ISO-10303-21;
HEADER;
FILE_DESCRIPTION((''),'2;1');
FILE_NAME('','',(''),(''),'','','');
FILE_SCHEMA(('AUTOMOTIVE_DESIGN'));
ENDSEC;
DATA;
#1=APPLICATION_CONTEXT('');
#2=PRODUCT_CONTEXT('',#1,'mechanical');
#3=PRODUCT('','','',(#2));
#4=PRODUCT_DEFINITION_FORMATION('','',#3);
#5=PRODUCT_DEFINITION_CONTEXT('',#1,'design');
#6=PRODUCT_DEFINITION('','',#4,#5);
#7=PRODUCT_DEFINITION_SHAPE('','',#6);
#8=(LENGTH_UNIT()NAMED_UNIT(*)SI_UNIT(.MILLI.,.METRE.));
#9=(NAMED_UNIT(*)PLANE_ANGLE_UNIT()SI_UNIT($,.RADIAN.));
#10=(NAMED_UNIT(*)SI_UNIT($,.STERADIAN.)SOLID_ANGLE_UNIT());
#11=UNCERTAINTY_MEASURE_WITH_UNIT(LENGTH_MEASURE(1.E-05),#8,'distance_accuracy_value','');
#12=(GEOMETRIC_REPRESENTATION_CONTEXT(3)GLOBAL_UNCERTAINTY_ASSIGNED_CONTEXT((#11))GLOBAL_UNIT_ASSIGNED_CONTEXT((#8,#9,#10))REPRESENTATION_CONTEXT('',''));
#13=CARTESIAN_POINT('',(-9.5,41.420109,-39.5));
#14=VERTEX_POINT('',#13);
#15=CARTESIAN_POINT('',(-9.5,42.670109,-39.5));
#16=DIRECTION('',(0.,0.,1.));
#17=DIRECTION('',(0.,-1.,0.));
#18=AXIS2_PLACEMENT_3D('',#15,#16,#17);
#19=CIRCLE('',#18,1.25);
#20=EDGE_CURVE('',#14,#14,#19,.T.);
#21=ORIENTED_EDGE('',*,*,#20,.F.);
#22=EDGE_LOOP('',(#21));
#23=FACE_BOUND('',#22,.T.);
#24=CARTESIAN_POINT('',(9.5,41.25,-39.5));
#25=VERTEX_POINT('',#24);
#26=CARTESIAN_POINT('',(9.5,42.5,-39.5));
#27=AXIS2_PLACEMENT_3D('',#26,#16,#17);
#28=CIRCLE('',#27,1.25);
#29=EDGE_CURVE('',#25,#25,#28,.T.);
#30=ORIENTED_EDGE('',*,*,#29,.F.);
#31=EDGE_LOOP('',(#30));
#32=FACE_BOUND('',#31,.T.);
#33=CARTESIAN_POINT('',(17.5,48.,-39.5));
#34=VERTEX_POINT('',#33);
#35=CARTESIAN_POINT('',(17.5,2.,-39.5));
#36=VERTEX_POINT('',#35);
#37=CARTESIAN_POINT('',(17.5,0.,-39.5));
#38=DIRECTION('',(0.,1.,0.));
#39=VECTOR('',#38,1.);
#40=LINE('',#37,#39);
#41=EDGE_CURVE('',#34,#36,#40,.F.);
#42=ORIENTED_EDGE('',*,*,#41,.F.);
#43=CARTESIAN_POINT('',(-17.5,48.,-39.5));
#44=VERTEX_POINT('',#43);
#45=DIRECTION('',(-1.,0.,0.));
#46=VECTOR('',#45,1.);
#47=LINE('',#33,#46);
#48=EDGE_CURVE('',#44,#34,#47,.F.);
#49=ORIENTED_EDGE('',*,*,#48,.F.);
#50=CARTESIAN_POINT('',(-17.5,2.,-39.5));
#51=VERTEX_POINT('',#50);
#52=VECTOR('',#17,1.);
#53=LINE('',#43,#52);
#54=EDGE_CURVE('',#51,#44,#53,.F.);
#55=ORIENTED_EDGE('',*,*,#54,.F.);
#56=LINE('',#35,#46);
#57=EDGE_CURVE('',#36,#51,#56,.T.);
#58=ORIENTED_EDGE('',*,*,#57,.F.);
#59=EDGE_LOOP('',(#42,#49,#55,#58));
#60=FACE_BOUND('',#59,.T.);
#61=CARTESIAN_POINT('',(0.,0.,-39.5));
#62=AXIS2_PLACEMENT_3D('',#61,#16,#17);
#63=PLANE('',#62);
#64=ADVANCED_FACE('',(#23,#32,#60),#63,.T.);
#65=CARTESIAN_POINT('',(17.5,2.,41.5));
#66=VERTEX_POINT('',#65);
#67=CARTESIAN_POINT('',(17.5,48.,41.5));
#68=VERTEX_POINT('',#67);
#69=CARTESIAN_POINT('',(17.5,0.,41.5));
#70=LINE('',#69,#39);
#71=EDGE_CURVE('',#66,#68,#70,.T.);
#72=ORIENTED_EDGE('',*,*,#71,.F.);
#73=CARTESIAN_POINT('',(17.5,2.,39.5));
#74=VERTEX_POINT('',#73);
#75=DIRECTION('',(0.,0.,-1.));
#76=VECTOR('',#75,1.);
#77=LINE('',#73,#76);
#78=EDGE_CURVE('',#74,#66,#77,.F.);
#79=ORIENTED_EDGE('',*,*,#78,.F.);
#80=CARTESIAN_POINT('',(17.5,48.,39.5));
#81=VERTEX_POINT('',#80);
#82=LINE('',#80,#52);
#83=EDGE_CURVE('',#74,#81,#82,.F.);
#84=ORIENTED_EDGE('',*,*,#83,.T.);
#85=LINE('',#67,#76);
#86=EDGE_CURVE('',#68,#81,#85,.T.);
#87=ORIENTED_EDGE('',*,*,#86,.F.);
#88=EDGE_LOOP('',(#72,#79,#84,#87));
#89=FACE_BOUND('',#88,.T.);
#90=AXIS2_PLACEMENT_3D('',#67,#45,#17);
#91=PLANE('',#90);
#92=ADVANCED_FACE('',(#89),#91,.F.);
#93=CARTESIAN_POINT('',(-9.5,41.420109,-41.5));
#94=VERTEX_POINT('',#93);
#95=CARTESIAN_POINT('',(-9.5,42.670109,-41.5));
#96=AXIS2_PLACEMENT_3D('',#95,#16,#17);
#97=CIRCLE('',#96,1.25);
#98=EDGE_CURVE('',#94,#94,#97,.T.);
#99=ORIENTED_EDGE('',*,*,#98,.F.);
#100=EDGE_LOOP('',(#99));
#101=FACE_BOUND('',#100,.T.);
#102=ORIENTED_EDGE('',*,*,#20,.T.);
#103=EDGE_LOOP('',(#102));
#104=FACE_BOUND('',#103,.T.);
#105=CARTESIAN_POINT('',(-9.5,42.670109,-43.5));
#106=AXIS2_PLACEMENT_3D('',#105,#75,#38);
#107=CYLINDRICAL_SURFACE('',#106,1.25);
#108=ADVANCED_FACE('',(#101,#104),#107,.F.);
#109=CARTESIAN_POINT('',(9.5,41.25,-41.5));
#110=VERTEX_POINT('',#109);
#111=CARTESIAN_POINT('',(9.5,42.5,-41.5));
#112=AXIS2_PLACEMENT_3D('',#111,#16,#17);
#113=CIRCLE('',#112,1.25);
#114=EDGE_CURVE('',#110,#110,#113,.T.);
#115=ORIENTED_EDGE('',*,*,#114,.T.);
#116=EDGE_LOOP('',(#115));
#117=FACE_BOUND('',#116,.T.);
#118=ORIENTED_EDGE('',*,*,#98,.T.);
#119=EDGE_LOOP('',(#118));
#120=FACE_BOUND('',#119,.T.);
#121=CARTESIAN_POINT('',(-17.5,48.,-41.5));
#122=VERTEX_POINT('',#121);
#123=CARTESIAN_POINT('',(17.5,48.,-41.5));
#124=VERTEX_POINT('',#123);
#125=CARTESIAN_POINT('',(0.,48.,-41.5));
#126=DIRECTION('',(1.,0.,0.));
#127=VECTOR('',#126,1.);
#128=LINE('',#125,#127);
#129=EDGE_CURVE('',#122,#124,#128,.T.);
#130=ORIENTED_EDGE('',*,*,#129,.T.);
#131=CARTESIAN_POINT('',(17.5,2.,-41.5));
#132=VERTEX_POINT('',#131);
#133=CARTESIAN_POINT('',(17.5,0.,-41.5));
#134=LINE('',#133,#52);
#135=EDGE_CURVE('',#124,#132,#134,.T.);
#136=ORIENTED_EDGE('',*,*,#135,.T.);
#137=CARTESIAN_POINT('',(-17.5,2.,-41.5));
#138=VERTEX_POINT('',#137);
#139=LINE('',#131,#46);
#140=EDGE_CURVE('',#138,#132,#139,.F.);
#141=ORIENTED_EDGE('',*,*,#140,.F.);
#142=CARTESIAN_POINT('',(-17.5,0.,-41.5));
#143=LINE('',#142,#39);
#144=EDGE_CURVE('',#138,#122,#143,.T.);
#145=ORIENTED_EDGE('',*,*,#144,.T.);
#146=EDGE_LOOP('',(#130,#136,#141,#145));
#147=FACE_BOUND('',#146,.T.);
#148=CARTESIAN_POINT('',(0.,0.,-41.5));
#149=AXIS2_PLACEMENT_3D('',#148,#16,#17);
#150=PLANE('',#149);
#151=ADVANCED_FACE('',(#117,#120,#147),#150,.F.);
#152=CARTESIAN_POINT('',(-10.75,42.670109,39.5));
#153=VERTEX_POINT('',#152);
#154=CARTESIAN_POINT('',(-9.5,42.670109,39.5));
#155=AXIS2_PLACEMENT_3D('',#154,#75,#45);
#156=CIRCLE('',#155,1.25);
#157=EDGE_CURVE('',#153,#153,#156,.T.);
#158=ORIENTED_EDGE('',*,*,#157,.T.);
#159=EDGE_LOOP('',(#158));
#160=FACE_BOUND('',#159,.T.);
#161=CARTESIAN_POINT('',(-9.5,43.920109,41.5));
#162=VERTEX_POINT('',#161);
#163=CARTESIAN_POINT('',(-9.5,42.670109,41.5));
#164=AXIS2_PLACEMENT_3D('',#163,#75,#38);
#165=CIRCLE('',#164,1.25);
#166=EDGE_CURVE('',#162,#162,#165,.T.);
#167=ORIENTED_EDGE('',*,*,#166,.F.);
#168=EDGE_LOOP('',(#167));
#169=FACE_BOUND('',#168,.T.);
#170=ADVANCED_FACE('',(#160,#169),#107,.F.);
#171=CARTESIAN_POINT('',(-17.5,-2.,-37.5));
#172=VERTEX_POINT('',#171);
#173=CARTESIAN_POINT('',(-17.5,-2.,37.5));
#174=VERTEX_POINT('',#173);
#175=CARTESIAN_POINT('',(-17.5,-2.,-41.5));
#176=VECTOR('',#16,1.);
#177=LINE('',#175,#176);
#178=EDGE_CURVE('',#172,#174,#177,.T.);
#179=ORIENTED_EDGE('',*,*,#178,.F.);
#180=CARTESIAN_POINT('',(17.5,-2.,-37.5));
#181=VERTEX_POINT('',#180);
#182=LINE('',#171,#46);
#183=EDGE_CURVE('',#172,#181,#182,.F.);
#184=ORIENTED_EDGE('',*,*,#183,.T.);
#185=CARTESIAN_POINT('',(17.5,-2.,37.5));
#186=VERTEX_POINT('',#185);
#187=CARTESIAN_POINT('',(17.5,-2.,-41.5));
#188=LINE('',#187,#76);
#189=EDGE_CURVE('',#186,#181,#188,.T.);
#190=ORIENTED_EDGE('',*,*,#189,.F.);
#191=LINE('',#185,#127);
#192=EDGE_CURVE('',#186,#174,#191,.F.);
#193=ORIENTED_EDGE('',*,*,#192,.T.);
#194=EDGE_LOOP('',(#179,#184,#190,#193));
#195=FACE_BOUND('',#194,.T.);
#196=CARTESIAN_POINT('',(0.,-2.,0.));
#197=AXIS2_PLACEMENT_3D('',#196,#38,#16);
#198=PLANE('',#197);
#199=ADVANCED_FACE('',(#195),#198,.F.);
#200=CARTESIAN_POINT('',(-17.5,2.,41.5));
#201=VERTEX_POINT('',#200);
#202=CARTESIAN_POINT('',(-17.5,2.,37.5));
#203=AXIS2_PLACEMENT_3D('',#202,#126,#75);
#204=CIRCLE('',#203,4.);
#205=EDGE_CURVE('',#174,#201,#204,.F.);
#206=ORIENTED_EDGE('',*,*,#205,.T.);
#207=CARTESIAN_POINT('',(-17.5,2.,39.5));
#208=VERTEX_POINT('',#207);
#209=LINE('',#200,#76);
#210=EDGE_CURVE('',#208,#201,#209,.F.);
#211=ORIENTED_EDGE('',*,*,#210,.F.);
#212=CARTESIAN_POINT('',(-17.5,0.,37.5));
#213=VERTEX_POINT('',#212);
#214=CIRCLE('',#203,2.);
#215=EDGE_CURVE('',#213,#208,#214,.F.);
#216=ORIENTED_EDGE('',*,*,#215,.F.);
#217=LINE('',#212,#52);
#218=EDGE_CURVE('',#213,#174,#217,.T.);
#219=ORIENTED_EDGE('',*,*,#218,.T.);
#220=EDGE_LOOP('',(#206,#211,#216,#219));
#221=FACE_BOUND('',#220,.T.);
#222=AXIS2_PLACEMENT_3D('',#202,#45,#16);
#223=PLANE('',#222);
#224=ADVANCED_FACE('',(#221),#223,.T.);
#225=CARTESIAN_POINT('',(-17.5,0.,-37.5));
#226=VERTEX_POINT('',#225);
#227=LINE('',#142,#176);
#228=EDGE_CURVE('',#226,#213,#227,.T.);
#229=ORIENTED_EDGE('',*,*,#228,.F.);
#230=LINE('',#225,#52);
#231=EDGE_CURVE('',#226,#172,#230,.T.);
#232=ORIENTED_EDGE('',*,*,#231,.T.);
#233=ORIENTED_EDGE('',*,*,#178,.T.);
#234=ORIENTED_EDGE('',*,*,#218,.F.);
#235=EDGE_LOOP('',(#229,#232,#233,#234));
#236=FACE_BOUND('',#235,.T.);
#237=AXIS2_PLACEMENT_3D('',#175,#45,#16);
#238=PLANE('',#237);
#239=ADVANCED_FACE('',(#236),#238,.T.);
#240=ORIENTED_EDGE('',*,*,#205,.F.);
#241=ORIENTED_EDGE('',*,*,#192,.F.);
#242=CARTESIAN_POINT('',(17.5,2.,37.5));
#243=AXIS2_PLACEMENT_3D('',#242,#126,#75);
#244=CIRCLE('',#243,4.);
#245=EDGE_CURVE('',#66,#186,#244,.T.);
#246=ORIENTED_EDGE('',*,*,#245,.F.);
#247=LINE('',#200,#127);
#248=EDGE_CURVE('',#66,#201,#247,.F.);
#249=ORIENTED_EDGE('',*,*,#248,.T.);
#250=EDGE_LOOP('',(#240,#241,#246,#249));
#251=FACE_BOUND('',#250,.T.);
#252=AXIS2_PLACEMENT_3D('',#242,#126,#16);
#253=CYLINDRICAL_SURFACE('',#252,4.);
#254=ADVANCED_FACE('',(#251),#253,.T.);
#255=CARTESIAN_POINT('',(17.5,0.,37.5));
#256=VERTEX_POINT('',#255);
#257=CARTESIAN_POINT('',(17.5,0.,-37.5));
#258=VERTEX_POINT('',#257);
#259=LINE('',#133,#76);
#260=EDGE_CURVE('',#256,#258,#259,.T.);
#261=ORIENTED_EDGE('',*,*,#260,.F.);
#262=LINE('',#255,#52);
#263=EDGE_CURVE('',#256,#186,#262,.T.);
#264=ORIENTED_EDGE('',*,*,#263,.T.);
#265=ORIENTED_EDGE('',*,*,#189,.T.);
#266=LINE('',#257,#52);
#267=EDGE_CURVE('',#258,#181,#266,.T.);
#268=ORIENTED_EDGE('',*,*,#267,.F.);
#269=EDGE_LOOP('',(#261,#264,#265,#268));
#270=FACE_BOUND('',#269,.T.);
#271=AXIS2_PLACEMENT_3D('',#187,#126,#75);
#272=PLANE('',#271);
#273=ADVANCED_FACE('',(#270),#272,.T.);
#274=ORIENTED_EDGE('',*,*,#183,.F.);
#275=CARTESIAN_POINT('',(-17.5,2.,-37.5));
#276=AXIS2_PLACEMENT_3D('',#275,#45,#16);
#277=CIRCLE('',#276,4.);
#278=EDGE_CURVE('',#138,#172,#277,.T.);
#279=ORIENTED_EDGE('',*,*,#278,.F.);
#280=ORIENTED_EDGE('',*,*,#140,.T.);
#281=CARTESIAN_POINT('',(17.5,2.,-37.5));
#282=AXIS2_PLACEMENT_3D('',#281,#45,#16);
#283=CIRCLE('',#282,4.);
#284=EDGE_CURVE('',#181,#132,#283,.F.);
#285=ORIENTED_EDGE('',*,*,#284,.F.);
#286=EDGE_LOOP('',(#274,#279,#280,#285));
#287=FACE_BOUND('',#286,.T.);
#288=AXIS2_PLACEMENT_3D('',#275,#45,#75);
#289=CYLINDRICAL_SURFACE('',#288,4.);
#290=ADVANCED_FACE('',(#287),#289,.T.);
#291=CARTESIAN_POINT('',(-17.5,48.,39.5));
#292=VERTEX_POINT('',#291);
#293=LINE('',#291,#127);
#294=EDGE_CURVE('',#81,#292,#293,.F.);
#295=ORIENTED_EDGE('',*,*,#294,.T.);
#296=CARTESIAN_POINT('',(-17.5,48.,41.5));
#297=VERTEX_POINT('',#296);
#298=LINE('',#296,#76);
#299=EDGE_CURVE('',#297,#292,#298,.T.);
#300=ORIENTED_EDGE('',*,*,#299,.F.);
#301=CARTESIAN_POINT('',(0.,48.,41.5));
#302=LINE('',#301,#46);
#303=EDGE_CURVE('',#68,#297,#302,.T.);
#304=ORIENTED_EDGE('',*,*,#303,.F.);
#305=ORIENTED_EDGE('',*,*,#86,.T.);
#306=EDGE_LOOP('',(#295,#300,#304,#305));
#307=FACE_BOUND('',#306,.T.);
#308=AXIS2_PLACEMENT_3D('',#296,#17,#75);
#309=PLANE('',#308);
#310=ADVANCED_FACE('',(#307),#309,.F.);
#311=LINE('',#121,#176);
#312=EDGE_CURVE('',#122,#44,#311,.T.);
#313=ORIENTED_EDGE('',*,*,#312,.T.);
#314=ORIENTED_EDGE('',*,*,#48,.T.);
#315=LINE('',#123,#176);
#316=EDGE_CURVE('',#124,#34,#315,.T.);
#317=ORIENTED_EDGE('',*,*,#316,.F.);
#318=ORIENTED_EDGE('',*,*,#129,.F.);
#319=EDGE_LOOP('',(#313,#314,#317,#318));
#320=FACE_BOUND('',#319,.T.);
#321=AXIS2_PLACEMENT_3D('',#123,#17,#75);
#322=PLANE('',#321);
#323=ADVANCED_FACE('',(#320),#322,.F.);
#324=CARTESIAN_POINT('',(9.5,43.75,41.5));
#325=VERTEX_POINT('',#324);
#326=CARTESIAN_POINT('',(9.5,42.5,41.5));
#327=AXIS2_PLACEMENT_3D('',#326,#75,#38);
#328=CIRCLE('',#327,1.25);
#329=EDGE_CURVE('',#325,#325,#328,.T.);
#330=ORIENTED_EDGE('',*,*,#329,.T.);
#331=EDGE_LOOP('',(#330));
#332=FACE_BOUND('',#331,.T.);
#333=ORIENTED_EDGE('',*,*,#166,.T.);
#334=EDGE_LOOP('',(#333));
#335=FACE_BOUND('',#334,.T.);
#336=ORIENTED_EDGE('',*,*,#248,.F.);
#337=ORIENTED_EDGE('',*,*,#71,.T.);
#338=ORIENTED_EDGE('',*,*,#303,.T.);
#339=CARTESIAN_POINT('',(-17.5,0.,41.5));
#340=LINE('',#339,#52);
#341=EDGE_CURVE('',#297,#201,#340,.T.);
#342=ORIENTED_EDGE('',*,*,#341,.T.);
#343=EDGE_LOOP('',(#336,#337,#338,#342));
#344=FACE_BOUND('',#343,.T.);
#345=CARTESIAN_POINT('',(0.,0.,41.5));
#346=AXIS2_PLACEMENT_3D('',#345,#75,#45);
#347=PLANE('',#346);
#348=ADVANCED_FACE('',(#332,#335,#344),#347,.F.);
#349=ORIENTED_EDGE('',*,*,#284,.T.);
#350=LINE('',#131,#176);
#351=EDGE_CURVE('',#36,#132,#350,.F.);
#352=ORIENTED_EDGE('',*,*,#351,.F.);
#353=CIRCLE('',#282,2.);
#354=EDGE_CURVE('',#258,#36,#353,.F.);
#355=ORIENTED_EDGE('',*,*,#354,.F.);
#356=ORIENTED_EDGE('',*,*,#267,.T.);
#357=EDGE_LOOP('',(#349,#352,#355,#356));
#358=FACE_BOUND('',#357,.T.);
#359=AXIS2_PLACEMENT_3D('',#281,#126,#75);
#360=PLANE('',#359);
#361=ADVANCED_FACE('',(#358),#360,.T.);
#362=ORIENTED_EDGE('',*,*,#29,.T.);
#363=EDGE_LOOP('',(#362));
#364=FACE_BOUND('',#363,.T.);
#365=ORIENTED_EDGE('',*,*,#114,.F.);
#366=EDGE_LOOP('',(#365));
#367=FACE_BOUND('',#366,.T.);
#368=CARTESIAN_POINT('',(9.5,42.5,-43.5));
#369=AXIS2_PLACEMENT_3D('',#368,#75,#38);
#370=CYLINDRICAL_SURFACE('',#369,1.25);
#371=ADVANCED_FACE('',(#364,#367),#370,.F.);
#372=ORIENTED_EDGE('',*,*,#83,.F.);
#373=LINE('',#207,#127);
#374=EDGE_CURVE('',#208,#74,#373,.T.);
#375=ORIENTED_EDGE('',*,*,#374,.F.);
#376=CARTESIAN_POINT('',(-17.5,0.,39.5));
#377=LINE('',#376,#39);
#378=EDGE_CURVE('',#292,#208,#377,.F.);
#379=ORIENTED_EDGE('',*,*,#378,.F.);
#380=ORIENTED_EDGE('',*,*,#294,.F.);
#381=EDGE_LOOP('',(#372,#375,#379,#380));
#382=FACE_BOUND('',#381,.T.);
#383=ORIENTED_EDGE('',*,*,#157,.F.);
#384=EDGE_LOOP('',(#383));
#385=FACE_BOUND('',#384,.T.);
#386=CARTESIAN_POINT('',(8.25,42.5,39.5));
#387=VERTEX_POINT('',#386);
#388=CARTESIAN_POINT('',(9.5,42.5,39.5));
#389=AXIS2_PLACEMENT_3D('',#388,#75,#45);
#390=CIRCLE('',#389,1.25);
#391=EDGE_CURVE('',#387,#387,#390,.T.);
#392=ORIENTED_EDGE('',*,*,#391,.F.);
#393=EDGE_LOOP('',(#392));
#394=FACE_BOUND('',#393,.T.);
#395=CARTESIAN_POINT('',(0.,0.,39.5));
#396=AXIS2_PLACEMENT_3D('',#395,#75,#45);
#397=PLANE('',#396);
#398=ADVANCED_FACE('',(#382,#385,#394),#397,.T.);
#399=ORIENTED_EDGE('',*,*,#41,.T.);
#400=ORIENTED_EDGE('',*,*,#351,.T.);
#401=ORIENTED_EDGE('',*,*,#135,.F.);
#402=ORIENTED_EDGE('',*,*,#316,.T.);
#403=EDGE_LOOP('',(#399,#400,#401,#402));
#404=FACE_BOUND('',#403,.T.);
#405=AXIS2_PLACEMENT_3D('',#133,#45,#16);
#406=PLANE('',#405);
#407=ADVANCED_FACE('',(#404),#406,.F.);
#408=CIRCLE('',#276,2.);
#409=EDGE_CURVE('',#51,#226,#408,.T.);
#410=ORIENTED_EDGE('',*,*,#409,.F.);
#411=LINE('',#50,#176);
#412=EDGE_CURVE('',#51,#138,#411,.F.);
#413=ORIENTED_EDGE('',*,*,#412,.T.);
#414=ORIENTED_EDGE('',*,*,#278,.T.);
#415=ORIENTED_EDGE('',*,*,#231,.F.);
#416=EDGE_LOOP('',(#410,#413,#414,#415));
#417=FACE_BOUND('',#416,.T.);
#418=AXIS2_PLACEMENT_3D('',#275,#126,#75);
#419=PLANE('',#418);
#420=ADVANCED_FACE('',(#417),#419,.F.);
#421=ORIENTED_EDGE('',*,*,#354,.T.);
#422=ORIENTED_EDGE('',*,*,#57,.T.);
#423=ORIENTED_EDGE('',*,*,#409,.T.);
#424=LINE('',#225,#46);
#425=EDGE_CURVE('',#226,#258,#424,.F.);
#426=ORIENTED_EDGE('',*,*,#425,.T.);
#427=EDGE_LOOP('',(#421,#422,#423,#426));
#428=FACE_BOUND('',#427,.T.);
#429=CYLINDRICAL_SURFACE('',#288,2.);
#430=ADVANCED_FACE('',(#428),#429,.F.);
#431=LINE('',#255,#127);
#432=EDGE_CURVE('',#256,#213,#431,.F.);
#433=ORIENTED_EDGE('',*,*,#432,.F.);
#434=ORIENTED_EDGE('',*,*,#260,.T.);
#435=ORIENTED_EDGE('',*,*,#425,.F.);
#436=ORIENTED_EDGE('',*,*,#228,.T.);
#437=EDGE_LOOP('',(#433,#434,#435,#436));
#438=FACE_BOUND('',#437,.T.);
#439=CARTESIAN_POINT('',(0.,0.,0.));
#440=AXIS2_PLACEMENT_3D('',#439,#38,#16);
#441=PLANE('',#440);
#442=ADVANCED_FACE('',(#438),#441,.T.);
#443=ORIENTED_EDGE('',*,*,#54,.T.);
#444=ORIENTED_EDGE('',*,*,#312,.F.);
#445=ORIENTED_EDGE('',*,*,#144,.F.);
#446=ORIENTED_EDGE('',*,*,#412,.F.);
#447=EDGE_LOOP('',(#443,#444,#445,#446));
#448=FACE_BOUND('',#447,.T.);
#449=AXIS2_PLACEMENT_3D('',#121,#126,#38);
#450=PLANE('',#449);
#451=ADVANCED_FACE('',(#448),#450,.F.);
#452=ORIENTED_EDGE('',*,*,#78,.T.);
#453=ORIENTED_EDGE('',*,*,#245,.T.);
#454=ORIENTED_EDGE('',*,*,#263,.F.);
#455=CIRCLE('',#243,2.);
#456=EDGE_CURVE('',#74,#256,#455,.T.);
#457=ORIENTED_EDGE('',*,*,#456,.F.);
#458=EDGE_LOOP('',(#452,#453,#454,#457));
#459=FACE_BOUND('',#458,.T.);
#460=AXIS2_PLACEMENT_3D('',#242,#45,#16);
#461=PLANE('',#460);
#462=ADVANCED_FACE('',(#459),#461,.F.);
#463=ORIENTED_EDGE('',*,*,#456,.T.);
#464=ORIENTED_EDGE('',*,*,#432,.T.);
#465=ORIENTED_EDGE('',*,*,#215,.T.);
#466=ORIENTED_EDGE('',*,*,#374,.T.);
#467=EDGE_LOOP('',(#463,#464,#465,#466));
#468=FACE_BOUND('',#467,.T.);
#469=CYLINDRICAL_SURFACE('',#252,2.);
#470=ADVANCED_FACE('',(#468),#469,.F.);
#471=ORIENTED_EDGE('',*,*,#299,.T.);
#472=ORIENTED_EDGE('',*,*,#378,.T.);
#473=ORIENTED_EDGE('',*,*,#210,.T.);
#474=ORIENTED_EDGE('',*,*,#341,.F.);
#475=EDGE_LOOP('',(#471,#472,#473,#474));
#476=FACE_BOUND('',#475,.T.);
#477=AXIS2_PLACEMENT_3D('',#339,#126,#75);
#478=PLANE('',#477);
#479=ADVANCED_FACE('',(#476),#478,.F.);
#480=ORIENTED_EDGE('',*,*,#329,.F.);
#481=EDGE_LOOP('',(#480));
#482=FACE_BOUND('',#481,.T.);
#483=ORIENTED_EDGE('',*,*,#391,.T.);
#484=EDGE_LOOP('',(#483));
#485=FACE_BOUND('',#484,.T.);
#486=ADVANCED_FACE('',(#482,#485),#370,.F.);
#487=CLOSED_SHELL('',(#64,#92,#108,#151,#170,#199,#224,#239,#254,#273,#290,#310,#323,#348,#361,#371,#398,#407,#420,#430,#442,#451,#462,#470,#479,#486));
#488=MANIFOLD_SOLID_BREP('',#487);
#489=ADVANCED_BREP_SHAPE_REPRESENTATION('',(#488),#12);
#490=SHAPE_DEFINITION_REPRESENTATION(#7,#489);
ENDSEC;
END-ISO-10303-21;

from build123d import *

# Parameters (mm, degrees)
SKETCH1_W                      = 35
SKETCH1_H                      = 83
BASE_FLANGE2_DEPTH             = 2
EDGE_FLANGE3_STRIP_W           = 12
EDGE_FLANGE3_STRIP_H           = 2
EDGE_FLANGE3_STRIP_CUT_DEPTH   = 35
EDGE_FLANGE3_STRIP_2_W         = 12
EDGE_FLANGE3_STRIP_2_H         = 2
EDGE_FLANGE3_STRIP_CUT_2_DEPTH = 35
EDGE_FLANGE3_DEPTH             = 35
EDGE_FLANGE3_BEND_DEPTH        = 35
TAP_DRILL_FOR_M3_TAP1_D        = 2.5


# Sheet-metal steps are written as plain solids
with BuildPart() as part:
    # Sketch1 → Base-Flange2 (new body)
    with BuildSketch(Plane(origin=(0, 0, 0), x_dir=(1, 0, 0), z_dir=(0, 1, 0))):
        Rectangle(SKETCH1_W, SKETCH1_H)
    extrude(amount=-BASE_FLANGE2_DEPTH)

    # Edge-Flange3 strip (across the edge) → Edge-Flange3 strip cut (cut)
    with BuildSketch(Plane(origin=(17.5, 0, -41.5), x_dir=(0, 0, 1), z_dir=(-1, 0, 0))):
        with Locations((-2, -1)):
            Rectangle(EDGE_FLANGE3_STRIP_W, EDGE_FLANGE3_STRIP_H)
    extrude(amount=EDGE_FLANGE3_STRIP_CUT_DEPTH, mode=Mode.SUBTRACT)

    # Edge-Flange3 strip 2 (across the edge) → Edge-Flange3 strip cut 2 (cut)
    with BuildSketch(Plane(origin=(-17.5, 0, 41.5), x_dir=(0, 0, -1), z_dir=(1, 0, 0))):
        with Locations((-2, -1)):
            Rectangle(EDGE_FLANGE3_STRIP_2_W, EDGE_FLANGE3_STRIP_2_H)
    extrude(amount=EDGE_FLANGE3_STRIP_CUT_2_DEPTH, mode=Mode.SUBTRACT)

    # Edge-Flange3 section (across the edge) → Edge-Flange3 (add)
    with BuildSketch(Plane(origin=(17.5, 0, -41.5), x_dir=(0, 0, 1), z_dir=(-1, 0, 0))):
        with BuildLine():
            Line((0, 2), (0, 48))
            Line((0, 48), (2, 48))
            Line((2, 48), (2, 2))
            ThreePointArc((2, 2), (2.585786438, 0.585786438), (4, 0))
            Line((4, 0), (4, -2))
            ThreePointArc((4, -2), (1.171572875, -0.828427125), (0, 2))
        make_face()
    extrude(amount=EDGE_FLANGE3_DEPTH)

    # Edge-Flange3 section 2 (across the edge) → Edge-Flange3 bend (add)
    with BuildSketch(Plane(origin=(-17.5, 0, 41.5), x_dir=(0, 0, -1), z_dir=(1, 0, 0))):
        with BuildLine():
            Line((0, 2), (0, 48))
            Line((0, 48), (2, 48))
            Line((2, 48), (2, 2))
            ThreePointArc((2, 2), (2.585786438, 0.585786438), (4, 0))
            Line((4, 0), (4, -2))
            ThreePointArc((4, -2), (1.171572875, -0.828427125), (0, 2))
        make_face()
    extrude(amount=EDGE_FLANGE3_BEND_DEPTH)

    # Tap Drill for M3 Tap1 (through all)
    with Locations(Plane(origin=(-15.830402425, -23.069767603, -43.5), x_dir=(-1, 0, 0), z_dir=(0, 0, -1))):
        with Locations((-25.330402425, 65.569767603), (-6.330402425, 65.739876607)):
            Hole(TAP_DRILL_FOR_M3_TAP1_D / 2)


solid = part.part
